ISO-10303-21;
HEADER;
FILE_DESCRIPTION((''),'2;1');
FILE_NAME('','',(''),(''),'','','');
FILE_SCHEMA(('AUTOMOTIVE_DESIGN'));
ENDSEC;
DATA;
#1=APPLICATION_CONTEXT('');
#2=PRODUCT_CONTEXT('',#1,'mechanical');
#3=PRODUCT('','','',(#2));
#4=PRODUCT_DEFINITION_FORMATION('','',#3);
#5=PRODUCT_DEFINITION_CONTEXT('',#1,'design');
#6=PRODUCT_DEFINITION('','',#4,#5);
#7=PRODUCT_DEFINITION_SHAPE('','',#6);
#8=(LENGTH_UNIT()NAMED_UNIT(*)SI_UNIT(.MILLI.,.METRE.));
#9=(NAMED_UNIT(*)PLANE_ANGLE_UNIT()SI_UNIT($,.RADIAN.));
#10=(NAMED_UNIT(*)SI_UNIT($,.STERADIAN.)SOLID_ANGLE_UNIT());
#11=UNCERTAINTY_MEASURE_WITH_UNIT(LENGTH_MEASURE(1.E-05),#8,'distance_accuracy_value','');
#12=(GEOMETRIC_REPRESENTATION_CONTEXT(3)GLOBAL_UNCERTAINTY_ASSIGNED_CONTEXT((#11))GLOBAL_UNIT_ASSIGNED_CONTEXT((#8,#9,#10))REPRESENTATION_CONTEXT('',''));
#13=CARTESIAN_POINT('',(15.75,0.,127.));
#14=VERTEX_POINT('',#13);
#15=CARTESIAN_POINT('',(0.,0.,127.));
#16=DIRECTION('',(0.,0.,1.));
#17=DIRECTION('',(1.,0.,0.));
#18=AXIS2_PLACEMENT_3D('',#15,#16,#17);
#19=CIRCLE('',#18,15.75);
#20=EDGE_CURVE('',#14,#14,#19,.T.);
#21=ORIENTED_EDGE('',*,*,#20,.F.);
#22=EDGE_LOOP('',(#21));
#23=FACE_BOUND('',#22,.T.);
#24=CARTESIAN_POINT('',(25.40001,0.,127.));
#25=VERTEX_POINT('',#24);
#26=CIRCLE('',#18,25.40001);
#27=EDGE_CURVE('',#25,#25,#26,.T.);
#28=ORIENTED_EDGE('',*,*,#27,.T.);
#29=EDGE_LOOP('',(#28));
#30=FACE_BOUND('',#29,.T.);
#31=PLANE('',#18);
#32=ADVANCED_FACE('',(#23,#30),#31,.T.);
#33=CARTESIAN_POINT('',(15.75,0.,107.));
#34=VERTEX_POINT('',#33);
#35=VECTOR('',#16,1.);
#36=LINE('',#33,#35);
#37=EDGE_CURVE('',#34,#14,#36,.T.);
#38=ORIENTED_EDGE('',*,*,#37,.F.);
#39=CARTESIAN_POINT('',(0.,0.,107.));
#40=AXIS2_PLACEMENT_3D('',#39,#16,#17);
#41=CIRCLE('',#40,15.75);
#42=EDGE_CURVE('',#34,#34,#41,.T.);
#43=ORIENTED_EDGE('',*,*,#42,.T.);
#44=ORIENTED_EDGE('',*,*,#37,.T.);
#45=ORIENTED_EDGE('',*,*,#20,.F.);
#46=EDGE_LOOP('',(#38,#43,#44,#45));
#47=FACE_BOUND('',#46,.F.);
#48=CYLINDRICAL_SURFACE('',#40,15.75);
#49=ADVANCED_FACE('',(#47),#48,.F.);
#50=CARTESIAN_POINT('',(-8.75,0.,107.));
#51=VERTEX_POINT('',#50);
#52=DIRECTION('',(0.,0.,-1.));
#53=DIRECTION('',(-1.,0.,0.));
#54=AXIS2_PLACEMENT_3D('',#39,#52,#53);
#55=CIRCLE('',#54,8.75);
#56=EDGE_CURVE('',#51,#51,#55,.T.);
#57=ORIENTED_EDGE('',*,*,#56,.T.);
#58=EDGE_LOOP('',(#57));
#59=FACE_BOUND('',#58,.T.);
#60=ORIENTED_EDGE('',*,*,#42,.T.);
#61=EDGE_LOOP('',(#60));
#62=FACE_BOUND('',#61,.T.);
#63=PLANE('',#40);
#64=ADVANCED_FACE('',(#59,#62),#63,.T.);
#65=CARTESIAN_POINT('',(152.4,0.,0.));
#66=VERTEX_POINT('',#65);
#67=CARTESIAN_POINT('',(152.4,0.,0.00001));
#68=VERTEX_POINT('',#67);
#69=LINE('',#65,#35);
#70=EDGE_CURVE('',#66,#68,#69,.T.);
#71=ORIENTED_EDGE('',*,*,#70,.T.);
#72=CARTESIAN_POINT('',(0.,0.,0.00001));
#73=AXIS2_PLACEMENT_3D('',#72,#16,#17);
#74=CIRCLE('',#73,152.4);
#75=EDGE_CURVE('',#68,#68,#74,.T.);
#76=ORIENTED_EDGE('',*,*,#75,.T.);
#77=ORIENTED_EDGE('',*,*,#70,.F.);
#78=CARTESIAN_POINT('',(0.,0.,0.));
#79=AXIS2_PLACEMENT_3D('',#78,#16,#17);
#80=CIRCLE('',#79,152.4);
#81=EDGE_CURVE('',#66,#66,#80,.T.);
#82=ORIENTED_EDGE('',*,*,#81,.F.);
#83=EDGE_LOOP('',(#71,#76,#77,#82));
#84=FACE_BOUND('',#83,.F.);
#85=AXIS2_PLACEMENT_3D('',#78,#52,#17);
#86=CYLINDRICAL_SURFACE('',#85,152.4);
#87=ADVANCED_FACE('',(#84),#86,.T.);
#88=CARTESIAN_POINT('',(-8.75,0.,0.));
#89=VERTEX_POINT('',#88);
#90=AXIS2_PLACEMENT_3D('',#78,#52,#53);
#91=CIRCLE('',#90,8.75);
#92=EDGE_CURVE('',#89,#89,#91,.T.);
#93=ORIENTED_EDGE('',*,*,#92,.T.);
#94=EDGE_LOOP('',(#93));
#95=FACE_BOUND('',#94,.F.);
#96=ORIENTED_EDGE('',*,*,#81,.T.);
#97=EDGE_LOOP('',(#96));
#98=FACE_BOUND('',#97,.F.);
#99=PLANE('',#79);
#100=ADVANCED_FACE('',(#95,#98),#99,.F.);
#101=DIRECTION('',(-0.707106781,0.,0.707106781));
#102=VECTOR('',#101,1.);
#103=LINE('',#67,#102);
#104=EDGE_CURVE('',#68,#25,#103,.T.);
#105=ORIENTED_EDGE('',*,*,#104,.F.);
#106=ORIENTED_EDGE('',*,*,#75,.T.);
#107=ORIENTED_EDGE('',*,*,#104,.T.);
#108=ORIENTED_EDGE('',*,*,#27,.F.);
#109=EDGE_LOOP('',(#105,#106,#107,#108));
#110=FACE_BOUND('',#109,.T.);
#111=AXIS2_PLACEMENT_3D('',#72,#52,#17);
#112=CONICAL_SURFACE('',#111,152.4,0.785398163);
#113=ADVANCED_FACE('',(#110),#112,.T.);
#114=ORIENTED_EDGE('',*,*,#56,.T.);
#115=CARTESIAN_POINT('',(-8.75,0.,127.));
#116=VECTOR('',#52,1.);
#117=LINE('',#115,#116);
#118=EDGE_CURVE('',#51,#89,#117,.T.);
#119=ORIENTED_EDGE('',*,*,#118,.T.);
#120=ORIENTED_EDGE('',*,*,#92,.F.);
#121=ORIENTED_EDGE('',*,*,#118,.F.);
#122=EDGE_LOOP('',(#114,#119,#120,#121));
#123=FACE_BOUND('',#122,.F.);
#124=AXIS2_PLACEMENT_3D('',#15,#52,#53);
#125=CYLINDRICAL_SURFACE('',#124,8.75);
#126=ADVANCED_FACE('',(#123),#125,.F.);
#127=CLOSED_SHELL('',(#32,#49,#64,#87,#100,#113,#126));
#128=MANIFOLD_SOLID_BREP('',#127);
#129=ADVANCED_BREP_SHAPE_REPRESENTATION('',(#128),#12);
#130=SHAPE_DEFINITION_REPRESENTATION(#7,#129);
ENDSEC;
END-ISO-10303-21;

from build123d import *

# Parameters (mm, degrees)
F0_R           = 152.4
F1_DEPTH       = 127
F3_D           = 17.5
F3_CBORE_D     = 31.5
F3_CBORE_DEPTH = 20
F4_SIZE        = 126.99999


# Not quite as in the source:
# - a fillet or chamfer is up to 0.001 mm smaller than in the source, because OpenCascade refuses the exact size


with BuildPart() as f1:
    # F0 (on Top) → F1 (new body)
    with BuildSketch(Plane.XY):
        Circle(F0_R)
    extrude(amount=F1_DEPTH)

    # F3 (through all)
    with Locations(Plane.XY.offset(127)):
        with Locations((0, 0)):
            CounterBoreHole(F3_D / 2, F3_CBORE_D / 2, F3_CBORE_DEPTH)

    # F4 (size 127 in the source; OpenCascade refuses exactly that, so slightly less here)
    f4_edges = [f1.edges().sort_by_distance(p)[0] for p in [
        (-152.4, 0, 127),
    ]]
    chamfer(f4_edges, length=F4_SIZE)


solid = f1.part
